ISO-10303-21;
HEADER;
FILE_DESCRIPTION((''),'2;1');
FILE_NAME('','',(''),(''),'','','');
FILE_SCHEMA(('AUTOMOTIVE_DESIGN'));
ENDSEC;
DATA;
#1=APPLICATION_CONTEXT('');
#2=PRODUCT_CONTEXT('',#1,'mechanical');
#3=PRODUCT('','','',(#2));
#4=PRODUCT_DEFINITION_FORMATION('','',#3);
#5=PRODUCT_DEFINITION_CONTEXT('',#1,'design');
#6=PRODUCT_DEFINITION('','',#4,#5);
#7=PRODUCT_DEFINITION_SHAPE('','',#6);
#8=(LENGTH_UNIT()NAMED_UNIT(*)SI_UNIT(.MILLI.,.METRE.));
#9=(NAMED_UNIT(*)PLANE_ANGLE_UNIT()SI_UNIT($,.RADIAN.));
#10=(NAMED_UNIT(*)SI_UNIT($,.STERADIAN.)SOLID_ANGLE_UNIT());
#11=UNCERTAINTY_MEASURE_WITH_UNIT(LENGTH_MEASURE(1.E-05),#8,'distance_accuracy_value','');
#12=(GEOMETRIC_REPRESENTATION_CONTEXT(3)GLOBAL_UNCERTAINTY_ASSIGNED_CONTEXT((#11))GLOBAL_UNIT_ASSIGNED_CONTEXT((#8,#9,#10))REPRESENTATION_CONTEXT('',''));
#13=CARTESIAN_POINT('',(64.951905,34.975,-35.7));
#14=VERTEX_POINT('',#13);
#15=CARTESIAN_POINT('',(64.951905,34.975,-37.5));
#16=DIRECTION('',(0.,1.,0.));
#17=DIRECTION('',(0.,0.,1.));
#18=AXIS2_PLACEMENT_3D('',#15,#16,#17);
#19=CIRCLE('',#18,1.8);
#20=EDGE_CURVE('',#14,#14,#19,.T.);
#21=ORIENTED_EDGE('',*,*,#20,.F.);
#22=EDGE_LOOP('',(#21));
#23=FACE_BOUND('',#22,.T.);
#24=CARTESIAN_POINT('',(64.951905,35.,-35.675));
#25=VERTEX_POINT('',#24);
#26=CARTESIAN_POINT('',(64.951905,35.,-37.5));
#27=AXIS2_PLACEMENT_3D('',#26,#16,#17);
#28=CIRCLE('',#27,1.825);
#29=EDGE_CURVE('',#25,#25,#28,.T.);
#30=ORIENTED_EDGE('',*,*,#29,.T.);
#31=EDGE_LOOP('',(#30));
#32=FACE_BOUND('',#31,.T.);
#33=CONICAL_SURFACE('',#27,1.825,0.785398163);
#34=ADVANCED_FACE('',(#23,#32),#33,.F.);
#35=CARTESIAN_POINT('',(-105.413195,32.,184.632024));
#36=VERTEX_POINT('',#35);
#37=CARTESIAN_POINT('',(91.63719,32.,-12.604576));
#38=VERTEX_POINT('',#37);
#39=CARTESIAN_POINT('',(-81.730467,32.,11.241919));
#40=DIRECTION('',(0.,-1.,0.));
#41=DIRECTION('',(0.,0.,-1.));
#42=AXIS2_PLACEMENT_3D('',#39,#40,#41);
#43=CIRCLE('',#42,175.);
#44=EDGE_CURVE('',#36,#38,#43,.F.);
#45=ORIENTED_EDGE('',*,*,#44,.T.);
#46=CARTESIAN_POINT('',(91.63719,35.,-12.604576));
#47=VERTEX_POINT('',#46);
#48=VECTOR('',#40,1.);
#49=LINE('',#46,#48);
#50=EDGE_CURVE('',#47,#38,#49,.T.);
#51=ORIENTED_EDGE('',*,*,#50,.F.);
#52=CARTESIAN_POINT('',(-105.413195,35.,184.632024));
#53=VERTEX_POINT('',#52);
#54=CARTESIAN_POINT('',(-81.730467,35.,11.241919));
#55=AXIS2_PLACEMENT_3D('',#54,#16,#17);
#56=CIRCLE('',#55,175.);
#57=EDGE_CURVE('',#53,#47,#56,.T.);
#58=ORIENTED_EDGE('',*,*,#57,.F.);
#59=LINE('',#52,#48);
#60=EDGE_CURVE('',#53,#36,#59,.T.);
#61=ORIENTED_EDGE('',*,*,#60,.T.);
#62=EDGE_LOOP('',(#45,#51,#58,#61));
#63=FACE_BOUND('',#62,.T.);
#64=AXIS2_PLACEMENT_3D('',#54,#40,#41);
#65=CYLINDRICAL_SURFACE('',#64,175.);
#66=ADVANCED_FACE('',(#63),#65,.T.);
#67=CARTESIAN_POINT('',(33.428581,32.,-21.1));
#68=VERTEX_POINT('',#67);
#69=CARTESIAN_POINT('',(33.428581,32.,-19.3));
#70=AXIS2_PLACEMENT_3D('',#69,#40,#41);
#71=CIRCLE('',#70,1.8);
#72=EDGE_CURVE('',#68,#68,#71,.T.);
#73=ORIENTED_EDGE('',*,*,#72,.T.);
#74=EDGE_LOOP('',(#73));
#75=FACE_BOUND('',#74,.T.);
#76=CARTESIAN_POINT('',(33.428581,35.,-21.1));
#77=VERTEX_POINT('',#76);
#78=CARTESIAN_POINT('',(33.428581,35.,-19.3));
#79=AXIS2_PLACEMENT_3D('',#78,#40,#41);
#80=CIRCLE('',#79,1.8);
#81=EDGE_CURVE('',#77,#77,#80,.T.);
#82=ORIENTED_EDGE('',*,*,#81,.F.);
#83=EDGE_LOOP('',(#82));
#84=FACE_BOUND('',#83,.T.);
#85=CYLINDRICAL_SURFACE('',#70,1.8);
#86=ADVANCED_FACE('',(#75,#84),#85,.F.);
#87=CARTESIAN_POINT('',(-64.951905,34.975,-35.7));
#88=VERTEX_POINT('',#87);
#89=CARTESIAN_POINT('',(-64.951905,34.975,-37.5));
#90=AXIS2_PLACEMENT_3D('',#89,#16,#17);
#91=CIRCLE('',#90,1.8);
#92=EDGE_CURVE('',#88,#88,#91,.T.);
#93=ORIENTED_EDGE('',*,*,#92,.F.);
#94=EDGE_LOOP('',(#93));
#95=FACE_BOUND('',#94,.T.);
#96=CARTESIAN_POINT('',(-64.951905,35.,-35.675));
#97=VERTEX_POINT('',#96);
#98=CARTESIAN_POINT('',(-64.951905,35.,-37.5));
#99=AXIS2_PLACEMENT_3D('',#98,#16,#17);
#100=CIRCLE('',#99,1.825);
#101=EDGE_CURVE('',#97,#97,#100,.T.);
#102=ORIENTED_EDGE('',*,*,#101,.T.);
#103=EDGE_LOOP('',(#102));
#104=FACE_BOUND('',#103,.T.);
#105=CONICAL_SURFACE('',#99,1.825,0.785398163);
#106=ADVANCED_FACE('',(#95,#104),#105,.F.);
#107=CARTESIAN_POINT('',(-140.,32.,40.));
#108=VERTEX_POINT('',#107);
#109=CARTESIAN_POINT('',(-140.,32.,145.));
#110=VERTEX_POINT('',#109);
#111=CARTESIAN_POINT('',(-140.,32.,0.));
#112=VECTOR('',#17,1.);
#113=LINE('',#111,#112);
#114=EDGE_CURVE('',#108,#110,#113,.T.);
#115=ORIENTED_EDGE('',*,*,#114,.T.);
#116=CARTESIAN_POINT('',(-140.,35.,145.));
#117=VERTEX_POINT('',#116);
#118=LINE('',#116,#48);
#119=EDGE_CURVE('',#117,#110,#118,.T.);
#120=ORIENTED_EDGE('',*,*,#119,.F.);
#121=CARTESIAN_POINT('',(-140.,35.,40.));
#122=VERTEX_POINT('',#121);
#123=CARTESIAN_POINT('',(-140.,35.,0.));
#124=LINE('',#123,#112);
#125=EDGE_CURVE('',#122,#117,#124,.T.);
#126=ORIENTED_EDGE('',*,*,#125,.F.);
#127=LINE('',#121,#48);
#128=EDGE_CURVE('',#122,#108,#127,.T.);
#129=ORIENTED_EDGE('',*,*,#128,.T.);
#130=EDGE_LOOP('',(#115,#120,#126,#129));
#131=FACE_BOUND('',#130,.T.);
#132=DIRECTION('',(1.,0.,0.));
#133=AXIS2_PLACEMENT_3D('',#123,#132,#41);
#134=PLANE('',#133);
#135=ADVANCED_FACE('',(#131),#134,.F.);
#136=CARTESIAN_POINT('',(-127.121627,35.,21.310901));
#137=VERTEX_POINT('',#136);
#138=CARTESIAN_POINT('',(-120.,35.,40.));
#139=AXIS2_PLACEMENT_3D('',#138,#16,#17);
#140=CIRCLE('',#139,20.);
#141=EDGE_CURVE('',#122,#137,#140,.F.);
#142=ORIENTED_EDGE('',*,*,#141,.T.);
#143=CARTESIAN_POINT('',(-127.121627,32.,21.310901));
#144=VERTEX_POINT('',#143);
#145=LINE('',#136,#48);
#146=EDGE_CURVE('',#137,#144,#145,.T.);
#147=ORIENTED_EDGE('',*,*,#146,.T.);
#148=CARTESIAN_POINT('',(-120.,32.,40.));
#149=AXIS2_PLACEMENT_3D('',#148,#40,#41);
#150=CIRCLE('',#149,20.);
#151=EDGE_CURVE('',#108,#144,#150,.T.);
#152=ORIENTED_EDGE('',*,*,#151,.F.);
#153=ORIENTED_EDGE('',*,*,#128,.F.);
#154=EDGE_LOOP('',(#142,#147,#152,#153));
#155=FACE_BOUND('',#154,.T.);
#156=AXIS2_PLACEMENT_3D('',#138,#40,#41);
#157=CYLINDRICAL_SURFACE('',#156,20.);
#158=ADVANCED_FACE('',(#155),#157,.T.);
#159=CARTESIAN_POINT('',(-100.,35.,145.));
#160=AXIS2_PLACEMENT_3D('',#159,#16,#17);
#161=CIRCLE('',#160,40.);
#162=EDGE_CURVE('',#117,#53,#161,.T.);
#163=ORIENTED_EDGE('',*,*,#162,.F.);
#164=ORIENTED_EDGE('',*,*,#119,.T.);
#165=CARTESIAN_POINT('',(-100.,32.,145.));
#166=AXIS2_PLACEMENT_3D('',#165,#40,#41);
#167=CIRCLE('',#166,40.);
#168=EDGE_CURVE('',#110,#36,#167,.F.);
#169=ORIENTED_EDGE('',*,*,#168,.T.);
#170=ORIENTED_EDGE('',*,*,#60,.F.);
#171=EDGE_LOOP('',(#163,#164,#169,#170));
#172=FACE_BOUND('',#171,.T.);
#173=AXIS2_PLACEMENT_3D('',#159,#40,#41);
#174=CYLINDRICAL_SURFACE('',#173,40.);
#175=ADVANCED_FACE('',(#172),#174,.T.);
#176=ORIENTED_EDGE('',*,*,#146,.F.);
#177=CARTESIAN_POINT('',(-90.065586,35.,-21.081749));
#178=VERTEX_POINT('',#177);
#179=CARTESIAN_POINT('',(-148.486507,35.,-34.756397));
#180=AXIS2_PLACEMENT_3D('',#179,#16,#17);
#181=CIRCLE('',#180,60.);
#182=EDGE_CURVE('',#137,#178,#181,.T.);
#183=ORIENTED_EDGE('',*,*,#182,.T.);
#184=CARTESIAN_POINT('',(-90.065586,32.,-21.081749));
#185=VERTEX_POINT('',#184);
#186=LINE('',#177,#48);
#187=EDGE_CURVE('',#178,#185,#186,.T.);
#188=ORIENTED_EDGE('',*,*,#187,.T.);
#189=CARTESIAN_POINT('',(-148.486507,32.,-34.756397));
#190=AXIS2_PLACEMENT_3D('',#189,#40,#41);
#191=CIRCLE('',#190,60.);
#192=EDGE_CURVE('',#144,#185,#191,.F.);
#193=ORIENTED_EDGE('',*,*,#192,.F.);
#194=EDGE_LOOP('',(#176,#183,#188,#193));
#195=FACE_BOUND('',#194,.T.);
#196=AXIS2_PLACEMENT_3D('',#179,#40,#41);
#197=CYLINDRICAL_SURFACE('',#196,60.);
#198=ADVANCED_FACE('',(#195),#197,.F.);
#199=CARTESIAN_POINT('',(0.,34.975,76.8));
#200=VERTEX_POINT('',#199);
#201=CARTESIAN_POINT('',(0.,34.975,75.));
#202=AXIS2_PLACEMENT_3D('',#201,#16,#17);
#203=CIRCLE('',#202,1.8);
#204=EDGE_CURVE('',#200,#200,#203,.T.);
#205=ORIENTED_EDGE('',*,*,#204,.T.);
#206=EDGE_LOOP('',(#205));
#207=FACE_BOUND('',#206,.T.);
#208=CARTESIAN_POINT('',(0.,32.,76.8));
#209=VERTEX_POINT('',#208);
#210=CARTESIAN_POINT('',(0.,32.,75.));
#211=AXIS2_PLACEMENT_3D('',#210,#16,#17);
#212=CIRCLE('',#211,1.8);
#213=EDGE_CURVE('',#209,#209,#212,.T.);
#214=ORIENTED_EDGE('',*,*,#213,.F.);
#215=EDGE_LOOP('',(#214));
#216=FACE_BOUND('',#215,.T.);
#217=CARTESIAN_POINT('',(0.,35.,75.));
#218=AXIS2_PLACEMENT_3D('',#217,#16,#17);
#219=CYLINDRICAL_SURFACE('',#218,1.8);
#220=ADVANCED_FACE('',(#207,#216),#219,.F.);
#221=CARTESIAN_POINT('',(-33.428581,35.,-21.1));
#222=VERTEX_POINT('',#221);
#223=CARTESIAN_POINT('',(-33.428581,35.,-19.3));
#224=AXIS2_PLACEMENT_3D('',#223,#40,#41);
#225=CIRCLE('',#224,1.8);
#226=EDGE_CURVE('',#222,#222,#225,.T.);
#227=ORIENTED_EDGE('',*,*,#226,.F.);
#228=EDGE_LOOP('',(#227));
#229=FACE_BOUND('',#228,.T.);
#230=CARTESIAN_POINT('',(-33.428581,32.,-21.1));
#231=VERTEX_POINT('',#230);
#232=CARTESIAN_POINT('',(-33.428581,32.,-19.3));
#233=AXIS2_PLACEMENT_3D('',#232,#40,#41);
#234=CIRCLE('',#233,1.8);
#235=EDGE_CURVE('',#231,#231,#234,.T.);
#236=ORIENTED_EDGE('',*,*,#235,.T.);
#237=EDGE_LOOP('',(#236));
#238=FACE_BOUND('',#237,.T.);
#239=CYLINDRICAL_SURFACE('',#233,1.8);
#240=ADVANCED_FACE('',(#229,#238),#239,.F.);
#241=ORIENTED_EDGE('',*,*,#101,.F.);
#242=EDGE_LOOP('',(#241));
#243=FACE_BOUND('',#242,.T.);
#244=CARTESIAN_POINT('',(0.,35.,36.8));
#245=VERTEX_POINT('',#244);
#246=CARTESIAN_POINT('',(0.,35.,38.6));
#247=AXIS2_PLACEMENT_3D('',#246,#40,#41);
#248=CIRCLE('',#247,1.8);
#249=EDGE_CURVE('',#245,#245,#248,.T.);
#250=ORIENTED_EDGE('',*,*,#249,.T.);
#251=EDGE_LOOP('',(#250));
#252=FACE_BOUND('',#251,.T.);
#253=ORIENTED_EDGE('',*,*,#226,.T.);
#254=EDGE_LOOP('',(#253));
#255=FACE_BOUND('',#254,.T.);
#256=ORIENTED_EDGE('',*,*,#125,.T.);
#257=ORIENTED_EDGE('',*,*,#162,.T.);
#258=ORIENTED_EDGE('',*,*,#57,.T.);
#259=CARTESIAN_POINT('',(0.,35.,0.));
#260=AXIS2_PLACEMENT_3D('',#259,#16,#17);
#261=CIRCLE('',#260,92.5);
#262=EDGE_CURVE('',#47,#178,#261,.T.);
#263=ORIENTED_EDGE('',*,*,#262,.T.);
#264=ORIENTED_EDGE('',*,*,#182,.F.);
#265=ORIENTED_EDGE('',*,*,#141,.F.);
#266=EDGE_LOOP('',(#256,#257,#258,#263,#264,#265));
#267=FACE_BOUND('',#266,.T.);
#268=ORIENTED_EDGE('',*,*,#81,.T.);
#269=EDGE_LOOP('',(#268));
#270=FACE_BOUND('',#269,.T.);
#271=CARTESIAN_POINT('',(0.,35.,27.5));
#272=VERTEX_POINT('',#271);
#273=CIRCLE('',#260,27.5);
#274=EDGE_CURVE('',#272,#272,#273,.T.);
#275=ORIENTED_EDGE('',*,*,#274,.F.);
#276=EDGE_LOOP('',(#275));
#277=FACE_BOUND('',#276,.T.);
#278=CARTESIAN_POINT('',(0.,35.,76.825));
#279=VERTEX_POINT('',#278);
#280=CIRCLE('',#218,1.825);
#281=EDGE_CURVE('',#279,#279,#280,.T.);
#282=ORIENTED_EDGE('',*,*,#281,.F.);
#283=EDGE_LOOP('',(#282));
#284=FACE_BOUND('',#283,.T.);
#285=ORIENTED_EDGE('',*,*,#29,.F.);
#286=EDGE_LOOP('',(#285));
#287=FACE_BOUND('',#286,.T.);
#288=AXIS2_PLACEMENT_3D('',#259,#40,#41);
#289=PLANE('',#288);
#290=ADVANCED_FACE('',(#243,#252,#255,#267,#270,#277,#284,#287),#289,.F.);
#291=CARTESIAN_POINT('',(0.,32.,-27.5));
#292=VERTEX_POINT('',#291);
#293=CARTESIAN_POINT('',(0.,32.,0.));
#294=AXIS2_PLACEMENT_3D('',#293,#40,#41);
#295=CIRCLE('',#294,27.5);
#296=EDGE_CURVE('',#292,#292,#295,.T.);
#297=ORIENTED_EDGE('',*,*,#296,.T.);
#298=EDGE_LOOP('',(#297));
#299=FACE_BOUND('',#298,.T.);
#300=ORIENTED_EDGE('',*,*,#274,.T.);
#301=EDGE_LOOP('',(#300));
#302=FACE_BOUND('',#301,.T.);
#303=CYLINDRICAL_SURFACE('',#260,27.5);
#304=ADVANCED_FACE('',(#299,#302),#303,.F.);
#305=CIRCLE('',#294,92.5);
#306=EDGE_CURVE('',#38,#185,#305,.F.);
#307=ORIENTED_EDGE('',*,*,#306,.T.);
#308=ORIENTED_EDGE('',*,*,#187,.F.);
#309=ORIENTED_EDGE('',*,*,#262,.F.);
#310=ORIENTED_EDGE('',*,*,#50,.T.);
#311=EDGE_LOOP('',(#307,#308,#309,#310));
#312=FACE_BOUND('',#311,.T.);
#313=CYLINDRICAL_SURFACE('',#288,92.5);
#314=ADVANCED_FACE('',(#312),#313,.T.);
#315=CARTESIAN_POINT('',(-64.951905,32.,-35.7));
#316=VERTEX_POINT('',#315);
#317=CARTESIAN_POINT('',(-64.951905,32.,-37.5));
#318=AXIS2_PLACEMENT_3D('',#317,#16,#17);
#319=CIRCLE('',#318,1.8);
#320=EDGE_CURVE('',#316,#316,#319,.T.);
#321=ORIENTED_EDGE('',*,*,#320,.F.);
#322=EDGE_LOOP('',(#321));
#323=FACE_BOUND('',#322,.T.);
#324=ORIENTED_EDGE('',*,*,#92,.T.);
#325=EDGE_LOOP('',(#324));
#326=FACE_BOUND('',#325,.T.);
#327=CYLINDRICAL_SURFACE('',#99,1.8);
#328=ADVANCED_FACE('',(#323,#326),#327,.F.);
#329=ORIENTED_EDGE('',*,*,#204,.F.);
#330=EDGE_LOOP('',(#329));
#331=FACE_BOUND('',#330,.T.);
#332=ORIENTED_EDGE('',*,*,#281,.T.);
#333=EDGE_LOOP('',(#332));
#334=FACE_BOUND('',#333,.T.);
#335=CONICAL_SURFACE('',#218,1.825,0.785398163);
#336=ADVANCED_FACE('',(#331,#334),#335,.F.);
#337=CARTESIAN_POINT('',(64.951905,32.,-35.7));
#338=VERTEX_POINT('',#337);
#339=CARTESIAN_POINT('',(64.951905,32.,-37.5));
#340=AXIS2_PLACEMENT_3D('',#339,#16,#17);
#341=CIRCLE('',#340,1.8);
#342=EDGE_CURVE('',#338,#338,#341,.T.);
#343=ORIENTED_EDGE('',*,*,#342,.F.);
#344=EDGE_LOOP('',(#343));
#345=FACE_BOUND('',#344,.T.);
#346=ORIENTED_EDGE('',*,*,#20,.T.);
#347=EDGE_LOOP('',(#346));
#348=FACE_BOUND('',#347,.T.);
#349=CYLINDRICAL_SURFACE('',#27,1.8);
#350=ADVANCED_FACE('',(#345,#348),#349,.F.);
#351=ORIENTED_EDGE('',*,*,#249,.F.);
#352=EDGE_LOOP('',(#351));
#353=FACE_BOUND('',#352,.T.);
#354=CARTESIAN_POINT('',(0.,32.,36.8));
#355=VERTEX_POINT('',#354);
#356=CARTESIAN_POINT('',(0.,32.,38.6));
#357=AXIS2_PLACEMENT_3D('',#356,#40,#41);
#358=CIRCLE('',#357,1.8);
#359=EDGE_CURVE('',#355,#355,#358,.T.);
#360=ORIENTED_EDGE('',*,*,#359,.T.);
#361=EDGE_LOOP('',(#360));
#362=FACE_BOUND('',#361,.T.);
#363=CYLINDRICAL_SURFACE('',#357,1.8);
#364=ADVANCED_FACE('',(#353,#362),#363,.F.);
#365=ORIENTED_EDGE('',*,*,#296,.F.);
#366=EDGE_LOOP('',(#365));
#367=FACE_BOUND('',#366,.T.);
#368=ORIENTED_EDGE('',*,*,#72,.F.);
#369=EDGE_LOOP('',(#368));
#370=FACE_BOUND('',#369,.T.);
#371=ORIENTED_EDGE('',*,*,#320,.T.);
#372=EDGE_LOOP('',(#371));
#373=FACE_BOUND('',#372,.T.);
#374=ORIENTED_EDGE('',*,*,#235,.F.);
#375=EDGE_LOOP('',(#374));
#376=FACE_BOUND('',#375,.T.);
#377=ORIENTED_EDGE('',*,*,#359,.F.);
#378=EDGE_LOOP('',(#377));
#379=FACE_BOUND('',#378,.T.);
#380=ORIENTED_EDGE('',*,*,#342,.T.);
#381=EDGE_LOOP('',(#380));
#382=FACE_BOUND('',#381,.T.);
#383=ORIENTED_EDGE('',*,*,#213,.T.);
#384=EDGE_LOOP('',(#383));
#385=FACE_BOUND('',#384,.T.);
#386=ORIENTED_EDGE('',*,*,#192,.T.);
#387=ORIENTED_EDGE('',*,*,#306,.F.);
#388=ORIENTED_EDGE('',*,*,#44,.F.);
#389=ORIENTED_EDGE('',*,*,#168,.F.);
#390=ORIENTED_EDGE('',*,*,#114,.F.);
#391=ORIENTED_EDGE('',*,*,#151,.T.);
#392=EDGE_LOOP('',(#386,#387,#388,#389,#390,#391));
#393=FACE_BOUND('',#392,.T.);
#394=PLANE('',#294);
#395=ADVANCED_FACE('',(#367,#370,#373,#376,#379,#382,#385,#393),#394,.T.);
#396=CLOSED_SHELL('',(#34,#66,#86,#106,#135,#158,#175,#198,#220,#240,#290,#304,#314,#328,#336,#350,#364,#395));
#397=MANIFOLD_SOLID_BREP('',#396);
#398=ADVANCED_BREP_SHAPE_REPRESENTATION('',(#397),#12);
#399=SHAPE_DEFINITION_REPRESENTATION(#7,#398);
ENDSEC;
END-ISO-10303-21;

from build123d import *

# Parameters (mm, degrees)
SKETCH1_W                      = 400
SKETCH1_H                      = 400
BOSS_EXTRUDE1_DEPTH            = 3
HOLE1_D                        = 55
HOLE1_DEPTH                    = 100
M3_CLEARANCE_HOLE2_D           = 3.6
SKETCH14_W                     = 654.860874268
SKETCH14_H                     = 577.568605061
CUT_EXTRUDE2_DEPTH             = 324.704448038
M3_CLEARANCE_HOLE3_D           = 3.6
M3_CLEARANCE_HOLE3_CSINK_D     = 3.65
M3_CLEARANCE_HOLE3_CSINK_ANGLE = 90


with BuildPart() as part:
    # Sketch1 → Boss-Extrude1 (new body)
    with BuildSketch(Plane(origin=(0, 32, 0), x_dir=(1, 0, 0), z_dir=(0, 1, 0))):
        with Locations((0, -52.110233191)):
            Rectangle(SKETCH1_W, SKETCH1_H)
    extrude(amount=BOSS_EXTRUDE1_DEPTH)

    # Hole1
    with Locations(Plane(origin=(0, 35, 0), x_dir=(1, 0, 0), z_dir=(0, 1, 0))):
        with Locations((0, 0)):
            Hole(HOLE1_D / 2, depth=HOLE1_DEPTH)

    # M3 Clearance Hole2 (through all)
    with Locations(Plane(origin=(0, 32, 0), x_dir=(-1, 0, 0), z_dir=(0, -1, 0))):
        with Locations((-33.428580586, 19.3), (33.428580586, 19.3), (0, -38.6)):
            Hole(M3_CLEARANCE_HOLE2_D / 2)

    # Sketch14 → Cut-Extrude2 (cut, through all)
    with BuildSketch(Plane(origin=(0, 0, 0), x_dir=(1, 0, 0), z_dir=(0, 1, 0))):
        with Locations((9.012512487, -38.692079752)):
            Rectangle(SKETCH14_W, SKETCH14_H)
        with BuildLine():
            Line((-140, -145), (-140, -70))
            Line((-140, -70), (-140, -40))
            ThreePointArc((-140, -40), (-136.468645007, -28.651707986), (-127.121626837, -21.310900739))
            ThreePointArc((-127.121626837, -21.310900739), (-103.31209295, -4.731224861), (-90.065586424, 21.081749027))
            ThreePointArc((-90.065586424, 21.081749027), (4.310811973, 92.399496211), (91.63719038, 12.604576122))
            ThreePointArc((91.63719038, 12.604576122), (42.071647749, -134.927150214), (-105.413194935, -184.632023928))
            ThreePointArc((-105.413194935, -184.632023928), (-130.137416921, -171.300876436), (-140, -145))
        make_face(mode=Mode.SUBTRACT)
    extrude(amount=CUT_EXTRUDE2_DEPTH, mode=Mode.SUBTRACT)

    # M3 Clearance Hole3 (through all)
    with Locations(Plane(origin=(0, 35, 0), x_dir=(1, 0, 0), z_dir=(0, 1, 0))):
        with Locations((-64.951905284, 37.5), (0, -75), (64.951905284, 37.5)):
            CounterSinkHole(M3_CLEARANCE_HOLE3_D / 2, M3_CLEARANCE_HOLE3_CSINK_D / 2, counter_sink_angle=M3_CLEARANCE_HOLE3_CSINK_ANGLE)


solid = part.part
